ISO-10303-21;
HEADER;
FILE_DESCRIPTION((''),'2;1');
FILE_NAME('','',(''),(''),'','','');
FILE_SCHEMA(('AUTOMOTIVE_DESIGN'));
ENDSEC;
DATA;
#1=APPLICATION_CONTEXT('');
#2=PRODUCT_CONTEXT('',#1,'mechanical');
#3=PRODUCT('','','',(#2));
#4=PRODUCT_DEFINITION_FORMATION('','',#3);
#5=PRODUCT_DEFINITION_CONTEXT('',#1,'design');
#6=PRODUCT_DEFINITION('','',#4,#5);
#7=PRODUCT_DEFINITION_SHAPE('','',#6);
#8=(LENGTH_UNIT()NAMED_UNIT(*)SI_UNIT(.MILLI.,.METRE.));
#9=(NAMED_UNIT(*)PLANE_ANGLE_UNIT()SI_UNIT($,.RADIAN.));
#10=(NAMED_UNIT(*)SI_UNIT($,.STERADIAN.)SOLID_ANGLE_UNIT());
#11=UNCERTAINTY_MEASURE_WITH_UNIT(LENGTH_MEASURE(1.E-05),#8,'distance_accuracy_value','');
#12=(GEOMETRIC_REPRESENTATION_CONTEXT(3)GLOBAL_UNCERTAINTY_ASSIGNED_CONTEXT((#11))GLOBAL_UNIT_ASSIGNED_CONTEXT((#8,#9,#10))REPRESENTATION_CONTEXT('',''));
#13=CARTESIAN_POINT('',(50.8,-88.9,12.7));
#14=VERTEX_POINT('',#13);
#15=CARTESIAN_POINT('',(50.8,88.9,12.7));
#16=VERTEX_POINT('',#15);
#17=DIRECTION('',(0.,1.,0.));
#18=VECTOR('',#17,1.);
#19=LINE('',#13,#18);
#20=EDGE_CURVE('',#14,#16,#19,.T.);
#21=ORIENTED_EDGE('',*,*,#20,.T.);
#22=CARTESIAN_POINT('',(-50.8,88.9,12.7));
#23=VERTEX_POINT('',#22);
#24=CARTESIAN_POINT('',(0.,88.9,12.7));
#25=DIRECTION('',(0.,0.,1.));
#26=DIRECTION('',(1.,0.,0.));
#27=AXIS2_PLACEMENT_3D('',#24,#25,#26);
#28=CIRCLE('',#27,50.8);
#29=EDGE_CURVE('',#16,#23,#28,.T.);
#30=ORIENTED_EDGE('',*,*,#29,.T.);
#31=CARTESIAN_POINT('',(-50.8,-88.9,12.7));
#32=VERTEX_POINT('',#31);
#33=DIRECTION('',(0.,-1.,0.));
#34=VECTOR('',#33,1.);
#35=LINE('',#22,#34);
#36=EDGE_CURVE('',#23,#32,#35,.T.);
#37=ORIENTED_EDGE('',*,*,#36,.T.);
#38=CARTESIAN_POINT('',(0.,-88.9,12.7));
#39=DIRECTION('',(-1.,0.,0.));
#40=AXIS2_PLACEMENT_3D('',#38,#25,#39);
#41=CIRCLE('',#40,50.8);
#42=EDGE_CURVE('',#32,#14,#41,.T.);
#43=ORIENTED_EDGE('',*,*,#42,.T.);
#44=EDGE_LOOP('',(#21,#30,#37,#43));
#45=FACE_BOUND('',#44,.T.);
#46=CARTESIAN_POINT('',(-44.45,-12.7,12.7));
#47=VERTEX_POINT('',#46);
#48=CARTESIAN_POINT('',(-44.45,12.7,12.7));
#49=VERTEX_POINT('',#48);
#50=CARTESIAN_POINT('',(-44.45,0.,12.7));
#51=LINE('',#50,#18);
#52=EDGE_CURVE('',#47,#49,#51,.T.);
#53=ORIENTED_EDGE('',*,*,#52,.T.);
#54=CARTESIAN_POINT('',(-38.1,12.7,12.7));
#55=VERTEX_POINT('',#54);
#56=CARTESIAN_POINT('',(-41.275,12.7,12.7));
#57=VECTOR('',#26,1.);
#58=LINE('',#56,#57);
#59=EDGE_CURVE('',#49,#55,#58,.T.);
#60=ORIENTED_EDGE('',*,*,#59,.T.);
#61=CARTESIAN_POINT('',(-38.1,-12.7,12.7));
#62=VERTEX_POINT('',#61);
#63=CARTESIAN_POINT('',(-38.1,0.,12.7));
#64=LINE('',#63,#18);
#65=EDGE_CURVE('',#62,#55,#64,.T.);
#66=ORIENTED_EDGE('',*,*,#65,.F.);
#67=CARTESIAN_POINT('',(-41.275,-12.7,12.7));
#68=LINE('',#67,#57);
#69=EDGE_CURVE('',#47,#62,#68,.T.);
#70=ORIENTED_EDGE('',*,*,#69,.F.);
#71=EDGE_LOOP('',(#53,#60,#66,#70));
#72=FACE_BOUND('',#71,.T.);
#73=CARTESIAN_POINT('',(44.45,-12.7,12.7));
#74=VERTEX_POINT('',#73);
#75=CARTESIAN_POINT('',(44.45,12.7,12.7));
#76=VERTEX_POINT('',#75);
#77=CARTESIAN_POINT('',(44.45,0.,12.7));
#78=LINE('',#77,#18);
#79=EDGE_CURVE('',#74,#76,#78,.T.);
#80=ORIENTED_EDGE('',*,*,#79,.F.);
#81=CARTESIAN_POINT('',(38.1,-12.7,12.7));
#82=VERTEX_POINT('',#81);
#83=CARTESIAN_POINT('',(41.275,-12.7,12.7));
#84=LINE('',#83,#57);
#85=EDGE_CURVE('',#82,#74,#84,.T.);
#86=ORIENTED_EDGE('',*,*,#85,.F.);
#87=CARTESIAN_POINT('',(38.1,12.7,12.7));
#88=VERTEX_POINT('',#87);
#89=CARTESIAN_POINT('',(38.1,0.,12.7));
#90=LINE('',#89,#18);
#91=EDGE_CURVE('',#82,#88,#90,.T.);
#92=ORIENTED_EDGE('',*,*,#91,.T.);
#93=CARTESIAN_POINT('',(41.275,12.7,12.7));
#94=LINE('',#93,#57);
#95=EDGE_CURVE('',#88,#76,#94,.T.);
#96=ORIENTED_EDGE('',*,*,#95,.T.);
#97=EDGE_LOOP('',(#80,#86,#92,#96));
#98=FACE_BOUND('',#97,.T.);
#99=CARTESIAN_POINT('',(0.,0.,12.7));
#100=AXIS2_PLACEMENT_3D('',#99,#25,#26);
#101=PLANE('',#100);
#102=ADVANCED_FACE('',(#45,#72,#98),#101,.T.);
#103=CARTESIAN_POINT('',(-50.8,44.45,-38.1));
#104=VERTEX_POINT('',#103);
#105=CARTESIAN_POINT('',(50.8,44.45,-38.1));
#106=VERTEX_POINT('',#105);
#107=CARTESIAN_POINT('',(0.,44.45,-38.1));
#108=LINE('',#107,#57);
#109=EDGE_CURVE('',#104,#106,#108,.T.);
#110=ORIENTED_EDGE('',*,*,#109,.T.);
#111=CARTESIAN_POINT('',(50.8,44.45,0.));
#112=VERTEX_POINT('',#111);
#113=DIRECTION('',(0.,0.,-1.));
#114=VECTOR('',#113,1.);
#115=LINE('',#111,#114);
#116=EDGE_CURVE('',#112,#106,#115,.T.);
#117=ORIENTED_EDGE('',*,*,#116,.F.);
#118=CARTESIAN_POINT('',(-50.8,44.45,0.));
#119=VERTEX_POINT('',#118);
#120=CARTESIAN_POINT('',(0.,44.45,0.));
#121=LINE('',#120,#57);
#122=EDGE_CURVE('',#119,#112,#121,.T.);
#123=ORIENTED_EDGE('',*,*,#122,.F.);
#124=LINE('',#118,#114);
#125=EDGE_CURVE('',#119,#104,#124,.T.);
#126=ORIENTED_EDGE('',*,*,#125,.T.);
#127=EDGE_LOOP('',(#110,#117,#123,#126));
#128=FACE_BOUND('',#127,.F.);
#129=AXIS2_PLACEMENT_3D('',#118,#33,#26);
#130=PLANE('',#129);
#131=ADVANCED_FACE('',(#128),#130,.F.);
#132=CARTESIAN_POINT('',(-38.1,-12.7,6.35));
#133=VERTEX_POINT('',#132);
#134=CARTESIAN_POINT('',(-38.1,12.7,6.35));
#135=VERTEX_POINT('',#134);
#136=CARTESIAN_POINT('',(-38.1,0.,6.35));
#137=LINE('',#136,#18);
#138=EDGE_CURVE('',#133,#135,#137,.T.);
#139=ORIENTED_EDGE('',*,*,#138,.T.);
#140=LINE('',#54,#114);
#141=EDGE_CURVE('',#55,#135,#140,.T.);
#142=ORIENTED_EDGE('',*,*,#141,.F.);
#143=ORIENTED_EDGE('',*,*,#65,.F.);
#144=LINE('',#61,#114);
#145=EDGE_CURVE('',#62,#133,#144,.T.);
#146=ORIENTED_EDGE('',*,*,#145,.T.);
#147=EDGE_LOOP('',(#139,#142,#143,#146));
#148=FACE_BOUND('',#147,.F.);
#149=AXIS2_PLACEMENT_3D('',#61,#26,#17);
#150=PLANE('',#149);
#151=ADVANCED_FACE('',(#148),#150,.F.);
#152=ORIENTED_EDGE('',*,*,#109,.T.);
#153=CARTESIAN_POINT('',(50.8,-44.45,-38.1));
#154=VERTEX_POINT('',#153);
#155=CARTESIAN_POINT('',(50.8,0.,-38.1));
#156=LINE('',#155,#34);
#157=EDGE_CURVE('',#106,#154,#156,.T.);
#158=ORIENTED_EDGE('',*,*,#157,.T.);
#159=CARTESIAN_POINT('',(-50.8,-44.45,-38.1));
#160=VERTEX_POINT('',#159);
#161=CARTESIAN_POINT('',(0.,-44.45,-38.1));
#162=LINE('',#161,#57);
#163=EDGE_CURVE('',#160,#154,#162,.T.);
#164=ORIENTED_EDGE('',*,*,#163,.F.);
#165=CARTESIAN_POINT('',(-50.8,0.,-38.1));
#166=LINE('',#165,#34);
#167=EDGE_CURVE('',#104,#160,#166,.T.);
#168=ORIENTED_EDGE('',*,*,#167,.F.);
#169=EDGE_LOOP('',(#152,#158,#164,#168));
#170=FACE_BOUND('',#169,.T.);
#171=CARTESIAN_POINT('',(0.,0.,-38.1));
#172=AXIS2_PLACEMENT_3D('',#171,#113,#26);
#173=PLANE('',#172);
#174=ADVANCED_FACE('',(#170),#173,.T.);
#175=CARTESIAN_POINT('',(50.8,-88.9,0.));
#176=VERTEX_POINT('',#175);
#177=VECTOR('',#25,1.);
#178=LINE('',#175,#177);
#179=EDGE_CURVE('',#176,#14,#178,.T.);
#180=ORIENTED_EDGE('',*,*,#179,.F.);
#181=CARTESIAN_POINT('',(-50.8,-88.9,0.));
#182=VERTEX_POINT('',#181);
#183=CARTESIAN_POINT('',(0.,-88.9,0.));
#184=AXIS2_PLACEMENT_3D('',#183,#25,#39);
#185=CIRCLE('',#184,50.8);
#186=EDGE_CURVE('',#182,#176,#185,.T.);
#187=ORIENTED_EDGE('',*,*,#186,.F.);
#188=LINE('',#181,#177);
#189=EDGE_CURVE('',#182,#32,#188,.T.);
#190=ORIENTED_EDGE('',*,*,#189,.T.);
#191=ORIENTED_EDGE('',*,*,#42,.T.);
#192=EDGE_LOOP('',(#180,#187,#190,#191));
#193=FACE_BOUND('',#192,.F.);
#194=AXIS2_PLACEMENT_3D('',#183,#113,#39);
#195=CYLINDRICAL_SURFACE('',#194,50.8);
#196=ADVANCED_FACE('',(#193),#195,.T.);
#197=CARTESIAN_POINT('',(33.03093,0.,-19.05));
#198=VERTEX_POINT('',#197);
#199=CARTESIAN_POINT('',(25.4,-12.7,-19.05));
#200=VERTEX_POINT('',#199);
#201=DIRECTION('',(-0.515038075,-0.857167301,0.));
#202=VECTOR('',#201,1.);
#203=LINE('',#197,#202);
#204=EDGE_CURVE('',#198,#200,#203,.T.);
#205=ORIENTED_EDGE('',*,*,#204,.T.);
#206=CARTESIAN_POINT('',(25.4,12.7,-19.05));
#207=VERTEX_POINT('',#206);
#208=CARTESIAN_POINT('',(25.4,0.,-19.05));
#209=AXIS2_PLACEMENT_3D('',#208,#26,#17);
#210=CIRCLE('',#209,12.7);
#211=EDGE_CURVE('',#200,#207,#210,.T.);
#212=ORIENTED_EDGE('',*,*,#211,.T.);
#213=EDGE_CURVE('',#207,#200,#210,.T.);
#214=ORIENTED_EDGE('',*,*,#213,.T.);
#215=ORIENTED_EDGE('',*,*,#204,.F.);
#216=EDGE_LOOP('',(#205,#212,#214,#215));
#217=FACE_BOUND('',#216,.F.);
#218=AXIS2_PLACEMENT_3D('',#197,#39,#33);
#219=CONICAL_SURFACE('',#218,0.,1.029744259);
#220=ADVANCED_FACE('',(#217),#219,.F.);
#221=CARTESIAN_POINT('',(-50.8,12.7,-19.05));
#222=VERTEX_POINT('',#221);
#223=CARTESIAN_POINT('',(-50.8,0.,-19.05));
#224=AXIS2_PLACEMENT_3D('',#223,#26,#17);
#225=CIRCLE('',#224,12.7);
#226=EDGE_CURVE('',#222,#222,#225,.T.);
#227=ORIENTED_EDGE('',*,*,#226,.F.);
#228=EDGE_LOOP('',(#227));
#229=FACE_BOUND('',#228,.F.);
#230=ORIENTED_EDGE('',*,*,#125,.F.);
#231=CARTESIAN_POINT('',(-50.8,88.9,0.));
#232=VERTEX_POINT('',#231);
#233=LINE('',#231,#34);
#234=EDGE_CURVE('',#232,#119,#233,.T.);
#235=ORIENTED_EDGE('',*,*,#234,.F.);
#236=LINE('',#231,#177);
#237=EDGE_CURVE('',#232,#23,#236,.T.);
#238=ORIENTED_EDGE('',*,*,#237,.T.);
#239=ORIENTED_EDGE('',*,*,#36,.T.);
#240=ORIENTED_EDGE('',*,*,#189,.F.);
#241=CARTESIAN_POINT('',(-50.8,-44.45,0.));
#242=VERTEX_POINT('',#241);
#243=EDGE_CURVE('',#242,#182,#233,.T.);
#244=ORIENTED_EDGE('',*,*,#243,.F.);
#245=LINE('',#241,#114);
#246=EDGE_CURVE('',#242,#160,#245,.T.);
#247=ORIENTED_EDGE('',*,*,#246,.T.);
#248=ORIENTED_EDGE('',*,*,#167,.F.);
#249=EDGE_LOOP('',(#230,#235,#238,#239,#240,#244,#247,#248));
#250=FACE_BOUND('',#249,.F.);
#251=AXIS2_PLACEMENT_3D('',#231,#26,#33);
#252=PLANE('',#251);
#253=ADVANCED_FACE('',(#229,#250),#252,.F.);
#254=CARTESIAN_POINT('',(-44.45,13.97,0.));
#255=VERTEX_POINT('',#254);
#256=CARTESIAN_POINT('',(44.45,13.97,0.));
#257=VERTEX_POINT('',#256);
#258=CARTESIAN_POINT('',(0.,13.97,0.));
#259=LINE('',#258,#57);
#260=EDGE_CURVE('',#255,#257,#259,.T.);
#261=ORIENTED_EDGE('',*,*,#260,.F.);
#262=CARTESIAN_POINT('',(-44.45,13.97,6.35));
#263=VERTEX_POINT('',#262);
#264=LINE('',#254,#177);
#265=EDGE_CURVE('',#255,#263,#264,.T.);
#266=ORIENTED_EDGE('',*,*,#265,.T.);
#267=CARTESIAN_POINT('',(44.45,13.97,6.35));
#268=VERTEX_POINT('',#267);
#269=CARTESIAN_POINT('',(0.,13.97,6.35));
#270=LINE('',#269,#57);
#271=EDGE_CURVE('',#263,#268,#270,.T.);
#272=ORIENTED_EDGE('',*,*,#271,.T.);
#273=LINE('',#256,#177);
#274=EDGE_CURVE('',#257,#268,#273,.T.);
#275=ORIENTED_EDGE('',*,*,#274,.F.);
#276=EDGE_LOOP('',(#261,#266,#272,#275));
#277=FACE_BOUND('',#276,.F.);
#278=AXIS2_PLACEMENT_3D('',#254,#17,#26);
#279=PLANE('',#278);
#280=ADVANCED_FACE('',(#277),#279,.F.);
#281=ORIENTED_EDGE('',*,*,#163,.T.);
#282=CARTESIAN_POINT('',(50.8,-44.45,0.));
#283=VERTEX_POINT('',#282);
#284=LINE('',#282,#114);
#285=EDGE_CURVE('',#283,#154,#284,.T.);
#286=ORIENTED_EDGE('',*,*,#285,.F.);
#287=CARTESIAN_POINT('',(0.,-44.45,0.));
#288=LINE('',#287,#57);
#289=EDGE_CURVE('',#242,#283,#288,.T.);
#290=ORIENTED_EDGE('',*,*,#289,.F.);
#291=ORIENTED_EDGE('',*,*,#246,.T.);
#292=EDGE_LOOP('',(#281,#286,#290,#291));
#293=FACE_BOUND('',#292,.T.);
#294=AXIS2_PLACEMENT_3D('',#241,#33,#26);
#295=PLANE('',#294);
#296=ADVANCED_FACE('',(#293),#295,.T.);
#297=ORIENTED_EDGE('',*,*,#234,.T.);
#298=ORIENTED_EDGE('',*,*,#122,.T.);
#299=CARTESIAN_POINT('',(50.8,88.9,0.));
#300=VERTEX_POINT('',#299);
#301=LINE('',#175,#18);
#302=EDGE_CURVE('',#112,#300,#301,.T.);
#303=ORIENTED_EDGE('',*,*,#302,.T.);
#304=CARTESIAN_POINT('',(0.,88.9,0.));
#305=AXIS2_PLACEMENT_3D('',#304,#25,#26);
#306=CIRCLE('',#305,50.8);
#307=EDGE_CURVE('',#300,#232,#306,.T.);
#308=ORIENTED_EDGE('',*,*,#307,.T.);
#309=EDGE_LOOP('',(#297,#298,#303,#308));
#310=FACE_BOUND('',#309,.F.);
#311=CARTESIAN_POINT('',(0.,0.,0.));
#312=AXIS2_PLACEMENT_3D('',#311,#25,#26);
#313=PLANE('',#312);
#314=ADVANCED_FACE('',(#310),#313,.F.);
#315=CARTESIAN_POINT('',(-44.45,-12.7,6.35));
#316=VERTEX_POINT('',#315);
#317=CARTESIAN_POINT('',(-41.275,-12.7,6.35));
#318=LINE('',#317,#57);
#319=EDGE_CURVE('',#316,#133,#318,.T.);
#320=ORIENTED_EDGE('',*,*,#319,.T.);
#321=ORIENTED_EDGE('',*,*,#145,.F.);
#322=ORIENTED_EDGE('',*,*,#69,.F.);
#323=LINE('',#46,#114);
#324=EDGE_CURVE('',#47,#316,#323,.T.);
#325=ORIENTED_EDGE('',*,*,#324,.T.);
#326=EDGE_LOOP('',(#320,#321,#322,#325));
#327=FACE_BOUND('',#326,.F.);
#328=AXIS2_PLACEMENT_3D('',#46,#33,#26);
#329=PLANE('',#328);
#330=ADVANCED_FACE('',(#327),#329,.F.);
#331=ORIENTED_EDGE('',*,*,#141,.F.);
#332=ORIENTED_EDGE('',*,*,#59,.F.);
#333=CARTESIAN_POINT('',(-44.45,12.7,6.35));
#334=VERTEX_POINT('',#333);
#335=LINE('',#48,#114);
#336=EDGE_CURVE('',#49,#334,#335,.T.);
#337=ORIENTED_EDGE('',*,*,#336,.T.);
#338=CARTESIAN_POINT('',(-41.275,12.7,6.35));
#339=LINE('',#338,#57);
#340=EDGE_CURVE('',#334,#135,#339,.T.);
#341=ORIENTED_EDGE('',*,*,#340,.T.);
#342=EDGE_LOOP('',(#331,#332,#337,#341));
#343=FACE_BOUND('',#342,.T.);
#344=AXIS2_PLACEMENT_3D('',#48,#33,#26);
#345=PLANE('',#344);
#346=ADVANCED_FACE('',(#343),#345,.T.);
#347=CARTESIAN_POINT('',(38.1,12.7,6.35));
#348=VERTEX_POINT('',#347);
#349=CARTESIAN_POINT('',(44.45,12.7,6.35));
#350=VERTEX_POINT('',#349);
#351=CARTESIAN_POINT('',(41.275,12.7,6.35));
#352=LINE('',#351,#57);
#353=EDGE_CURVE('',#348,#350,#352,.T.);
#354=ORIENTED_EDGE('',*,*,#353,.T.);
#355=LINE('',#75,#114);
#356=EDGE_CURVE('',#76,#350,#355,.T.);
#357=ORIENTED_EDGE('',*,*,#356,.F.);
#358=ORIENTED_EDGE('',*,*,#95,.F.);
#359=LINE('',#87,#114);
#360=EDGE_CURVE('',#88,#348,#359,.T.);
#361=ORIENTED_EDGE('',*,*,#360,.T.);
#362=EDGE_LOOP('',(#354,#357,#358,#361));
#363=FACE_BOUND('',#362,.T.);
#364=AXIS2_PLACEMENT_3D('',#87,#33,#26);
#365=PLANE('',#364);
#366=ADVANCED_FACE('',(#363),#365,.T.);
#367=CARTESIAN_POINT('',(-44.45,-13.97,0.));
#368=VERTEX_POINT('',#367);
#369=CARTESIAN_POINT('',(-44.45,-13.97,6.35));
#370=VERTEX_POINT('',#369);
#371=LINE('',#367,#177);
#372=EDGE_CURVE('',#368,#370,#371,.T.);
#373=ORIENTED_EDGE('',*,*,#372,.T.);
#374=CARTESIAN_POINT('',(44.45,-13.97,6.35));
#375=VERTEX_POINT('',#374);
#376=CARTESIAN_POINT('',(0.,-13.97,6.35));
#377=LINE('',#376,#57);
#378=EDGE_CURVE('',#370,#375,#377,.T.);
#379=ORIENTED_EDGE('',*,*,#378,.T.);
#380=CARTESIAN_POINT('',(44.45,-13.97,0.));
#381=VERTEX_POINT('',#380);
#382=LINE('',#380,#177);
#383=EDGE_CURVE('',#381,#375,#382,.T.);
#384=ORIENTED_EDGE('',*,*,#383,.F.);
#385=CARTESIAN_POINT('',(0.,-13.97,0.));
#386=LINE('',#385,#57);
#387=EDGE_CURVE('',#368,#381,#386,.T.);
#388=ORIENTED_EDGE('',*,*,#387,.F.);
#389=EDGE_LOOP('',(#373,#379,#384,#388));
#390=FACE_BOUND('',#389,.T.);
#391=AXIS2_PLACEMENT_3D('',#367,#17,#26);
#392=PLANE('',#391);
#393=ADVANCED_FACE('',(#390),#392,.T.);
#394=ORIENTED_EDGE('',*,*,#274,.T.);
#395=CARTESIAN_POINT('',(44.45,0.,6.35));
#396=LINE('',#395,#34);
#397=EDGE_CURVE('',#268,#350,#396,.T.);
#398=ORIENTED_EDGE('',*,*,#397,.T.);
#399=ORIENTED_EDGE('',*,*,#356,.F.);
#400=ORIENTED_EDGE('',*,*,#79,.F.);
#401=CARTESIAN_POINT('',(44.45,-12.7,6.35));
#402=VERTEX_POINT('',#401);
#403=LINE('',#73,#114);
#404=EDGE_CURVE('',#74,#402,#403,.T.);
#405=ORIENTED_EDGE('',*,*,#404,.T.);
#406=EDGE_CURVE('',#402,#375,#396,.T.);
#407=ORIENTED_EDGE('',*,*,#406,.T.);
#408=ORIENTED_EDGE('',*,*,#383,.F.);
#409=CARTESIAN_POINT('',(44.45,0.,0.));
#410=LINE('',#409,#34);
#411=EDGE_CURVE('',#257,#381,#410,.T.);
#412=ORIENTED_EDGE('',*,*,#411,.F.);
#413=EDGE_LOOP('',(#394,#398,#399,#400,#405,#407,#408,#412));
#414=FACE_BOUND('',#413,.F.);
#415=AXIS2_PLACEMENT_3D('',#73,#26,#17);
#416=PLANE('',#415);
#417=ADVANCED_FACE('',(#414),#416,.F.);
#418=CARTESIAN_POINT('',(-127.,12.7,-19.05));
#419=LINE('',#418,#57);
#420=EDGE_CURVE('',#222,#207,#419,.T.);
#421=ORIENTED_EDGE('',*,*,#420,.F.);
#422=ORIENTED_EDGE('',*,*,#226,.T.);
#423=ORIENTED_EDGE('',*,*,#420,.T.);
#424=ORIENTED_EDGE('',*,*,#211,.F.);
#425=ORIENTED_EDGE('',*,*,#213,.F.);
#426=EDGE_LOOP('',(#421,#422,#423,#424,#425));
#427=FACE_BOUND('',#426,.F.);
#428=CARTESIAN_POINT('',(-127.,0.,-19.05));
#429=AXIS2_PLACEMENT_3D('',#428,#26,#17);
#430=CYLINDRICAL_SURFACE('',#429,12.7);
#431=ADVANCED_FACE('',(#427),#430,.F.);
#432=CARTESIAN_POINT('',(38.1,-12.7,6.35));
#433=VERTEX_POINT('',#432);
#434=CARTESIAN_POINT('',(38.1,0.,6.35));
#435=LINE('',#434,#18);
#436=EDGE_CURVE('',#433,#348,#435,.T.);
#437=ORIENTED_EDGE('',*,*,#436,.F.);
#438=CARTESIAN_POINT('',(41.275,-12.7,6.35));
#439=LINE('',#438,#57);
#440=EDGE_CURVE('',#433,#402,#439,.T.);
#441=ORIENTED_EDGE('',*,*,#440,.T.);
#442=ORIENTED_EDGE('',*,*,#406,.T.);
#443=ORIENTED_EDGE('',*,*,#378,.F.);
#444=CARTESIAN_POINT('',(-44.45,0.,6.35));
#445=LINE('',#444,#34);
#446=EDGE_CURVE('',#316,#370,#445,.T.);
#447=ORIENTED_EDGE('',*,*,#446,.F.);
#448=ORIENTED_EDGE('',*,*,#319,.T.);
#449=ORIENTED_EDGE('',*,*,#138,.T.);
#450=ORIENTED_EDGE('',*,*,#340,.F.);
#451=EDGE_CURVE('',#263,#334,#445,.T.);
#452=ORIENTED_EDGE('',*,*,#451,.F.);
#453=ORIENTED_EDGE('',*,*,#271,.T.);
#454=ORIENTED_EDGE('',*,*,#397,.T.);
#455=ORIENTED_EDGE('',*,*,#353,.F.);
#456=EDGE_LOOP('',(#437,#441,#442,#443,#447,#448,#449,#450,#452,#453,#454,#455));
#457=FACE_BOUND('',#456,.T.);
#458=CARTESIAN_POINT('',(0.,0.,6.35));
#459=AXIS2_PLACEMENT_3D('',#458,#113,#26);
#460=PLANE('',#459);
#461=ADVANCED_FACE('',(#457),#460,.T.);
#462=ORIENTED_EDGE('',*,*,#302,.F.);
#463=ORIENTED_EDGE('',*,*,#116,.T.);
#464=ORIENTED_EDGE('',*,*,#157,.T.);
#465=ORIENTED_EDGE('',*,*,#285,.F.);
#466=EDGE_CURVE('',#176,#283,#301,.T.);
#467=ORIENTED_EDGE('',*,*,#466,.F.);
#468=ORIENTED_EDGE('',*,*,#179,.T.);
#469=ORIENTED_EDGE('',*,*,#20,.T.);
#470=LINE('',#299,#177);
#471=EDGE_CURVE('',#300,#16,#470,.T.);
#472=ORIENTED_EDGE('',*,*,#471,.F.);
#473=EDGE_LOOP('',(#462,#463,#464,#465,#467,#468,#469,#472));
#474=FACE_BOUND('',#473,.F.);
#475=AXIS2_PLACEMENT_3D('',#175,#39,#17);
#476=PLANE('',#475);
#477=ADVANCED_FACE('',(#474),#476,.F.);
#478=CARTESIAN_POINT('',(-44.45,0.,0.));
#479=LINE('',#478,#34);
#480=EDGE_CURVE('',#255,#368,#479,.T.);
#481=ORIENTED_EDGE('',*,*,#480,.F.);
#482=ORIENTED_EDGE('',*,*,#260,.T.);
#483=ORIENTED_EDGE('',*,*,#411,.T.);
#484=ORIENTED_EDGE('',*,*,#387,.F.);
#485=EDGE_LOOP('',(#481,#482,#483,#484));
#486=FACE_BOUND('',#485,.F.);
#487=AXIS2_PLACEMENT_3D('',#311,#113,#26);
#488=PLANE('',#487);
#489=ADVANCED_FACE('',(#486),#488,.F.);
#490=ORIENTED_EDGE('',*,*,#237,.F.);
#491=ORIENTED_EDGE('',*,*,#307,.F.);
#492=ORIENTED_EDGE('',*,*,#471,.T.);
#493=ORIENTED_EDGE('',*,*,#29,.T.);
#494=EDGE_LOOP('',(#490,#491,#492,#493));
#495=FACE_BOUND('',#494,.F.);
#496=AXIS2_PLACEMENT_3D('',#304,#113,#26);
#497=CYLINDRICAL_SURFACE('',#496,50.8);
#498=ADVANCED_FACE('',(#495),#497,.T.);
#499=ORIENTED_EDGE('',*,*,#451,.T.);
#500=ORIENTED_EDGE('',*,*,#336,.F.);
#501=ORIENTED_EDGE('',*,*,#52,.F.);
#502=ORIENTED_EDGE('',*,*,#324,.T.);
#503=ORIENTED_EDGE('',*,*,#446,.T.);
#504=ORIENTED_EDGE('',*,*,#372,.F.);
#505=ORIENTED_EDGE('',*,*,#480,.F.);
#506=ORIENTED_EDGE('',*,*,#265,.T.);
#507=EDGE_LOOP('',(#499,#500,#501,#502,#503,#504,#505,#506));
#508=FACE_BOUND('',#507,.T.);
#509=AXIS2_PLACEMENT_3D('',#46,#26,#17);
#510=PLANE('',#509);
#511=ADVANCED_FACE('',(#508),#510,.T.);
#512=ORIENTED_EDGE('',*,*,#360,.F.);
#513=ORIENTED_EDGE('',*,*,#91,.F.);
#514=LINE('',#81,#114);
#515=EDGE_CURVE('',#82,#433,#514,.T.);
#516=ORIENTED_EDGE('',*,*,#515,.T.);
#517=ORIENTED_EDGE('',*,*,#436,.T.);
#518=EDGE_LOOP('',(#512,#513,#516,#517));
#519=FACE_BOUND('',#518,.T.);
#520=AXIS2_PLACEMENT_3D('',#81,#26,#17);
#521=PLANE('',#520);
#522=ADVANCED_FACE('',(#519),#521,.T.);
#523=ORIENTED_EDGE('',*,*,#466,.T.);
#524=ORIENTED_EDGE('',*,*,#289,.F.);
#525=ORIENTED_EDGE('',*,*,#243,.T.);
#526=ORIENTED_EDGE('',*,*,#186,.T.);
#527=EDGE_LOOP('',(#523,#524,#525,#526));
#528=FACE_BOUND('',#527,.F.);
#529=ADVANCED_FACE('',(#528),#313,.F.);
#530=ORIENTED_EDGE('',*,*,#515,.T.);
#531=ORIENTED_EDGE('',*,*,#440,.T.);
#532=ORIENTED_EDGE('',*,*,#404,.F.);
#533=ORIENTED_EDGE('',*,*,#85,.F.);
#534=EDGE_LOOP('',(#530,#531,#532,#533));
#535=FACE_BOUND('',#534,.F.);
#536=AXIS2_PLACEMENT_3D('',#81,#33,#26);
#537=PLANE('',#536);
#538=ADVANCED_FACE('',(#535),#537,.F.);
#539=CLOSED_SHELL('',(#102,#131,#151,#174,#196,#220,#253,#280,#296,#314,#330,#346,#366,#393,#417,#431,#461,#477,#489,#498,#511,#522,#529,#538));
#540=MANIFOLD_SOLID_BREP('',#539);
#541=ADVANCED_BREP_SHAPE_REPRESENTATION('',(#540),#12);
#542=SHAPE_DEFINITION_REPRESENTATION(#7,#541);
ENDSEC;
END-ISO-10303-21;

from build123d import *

# Parameters (mm, degrees)
F1_DEPTH = 12.7
F2_W     = 101.6
F2_H     = 88.9
F3_DEPTH = 38.1
F5_D     = 25.4
F5_DEPTH = 76.2
F5_TIP   = 7.6309298617
F6_W     = 6.35
F6_H     = 25.4
F7_DEPTH = 6.35
F8_W     = 88.9
F8_H     = 27.94
F9_DEPTH = 6.35


with BuildPart() as f1:
    # F0 (on Top) → F1 (new body)
    with BuildSketch(Plane.XY):
        with BuildLine():
            Line((-50.8, 88.9), (-50.8, -88.9))
            ThreePointArc((-50.8, -88.9), (0, -139.7), (50.8, -88.9))
            Line((50.8, -88.9), (50.8, 88.9))
            ThreePointArc((50.8, 88.9), (0, 139.7), (-50.8, 88.9))
        make_face()
    extrude(amount=F1_DEPTH)

    # F2 (on face) → F3 (join)
    with BuildSketch(Plane(origin=(0, 0, 0), x_dir=(1, 0, 0), z_dir=(0, 0, -1))):
        Rectangle(F2_W, F2_H)
    extrude(amount=F3_DEPTH)

    # F5
    with Locations(Plane(origin=(-50.8, 0, 0), x_dir=(0, -1, 0), z_dir=(-1, 0, 0))):
        with Locations((0, -19.05)):
            Hole(F5_D / 2, depth=F5_DEPTH)
            with Locations((0, 0, -(F5_DEPTH + F5_TIP / 2))):  # 118° drill point
                Cone(0, F5_D / 2, F5_TIP, mode=Mode.SUBTRACT)

    # F6 (on face) → F7 (cut)
    with BuildSketch(Plane.XY.offset(12.7)):
        with Locations((-41.275, 0)):
            Rectangle(F6_W, F6_H)
        with Locations((41.275, 0)):
            Rectangle(F6_W, F6_H)
    extrude(amount=-F7_DEPTH, mode=Mode.SUBTRACT)

    # F8 (on face) → F9 (cut)
    with BuildSketch(Plane(origin=(0, 0, 0), x_dir=(1, 0, 0), z_dir=(0, 0, -1))):
        Rectangle(F8_W, F8_H)
    extrude(amount=-F9_DEPTH, mode=Mode.SUBTRACT)


solid = f1.part
